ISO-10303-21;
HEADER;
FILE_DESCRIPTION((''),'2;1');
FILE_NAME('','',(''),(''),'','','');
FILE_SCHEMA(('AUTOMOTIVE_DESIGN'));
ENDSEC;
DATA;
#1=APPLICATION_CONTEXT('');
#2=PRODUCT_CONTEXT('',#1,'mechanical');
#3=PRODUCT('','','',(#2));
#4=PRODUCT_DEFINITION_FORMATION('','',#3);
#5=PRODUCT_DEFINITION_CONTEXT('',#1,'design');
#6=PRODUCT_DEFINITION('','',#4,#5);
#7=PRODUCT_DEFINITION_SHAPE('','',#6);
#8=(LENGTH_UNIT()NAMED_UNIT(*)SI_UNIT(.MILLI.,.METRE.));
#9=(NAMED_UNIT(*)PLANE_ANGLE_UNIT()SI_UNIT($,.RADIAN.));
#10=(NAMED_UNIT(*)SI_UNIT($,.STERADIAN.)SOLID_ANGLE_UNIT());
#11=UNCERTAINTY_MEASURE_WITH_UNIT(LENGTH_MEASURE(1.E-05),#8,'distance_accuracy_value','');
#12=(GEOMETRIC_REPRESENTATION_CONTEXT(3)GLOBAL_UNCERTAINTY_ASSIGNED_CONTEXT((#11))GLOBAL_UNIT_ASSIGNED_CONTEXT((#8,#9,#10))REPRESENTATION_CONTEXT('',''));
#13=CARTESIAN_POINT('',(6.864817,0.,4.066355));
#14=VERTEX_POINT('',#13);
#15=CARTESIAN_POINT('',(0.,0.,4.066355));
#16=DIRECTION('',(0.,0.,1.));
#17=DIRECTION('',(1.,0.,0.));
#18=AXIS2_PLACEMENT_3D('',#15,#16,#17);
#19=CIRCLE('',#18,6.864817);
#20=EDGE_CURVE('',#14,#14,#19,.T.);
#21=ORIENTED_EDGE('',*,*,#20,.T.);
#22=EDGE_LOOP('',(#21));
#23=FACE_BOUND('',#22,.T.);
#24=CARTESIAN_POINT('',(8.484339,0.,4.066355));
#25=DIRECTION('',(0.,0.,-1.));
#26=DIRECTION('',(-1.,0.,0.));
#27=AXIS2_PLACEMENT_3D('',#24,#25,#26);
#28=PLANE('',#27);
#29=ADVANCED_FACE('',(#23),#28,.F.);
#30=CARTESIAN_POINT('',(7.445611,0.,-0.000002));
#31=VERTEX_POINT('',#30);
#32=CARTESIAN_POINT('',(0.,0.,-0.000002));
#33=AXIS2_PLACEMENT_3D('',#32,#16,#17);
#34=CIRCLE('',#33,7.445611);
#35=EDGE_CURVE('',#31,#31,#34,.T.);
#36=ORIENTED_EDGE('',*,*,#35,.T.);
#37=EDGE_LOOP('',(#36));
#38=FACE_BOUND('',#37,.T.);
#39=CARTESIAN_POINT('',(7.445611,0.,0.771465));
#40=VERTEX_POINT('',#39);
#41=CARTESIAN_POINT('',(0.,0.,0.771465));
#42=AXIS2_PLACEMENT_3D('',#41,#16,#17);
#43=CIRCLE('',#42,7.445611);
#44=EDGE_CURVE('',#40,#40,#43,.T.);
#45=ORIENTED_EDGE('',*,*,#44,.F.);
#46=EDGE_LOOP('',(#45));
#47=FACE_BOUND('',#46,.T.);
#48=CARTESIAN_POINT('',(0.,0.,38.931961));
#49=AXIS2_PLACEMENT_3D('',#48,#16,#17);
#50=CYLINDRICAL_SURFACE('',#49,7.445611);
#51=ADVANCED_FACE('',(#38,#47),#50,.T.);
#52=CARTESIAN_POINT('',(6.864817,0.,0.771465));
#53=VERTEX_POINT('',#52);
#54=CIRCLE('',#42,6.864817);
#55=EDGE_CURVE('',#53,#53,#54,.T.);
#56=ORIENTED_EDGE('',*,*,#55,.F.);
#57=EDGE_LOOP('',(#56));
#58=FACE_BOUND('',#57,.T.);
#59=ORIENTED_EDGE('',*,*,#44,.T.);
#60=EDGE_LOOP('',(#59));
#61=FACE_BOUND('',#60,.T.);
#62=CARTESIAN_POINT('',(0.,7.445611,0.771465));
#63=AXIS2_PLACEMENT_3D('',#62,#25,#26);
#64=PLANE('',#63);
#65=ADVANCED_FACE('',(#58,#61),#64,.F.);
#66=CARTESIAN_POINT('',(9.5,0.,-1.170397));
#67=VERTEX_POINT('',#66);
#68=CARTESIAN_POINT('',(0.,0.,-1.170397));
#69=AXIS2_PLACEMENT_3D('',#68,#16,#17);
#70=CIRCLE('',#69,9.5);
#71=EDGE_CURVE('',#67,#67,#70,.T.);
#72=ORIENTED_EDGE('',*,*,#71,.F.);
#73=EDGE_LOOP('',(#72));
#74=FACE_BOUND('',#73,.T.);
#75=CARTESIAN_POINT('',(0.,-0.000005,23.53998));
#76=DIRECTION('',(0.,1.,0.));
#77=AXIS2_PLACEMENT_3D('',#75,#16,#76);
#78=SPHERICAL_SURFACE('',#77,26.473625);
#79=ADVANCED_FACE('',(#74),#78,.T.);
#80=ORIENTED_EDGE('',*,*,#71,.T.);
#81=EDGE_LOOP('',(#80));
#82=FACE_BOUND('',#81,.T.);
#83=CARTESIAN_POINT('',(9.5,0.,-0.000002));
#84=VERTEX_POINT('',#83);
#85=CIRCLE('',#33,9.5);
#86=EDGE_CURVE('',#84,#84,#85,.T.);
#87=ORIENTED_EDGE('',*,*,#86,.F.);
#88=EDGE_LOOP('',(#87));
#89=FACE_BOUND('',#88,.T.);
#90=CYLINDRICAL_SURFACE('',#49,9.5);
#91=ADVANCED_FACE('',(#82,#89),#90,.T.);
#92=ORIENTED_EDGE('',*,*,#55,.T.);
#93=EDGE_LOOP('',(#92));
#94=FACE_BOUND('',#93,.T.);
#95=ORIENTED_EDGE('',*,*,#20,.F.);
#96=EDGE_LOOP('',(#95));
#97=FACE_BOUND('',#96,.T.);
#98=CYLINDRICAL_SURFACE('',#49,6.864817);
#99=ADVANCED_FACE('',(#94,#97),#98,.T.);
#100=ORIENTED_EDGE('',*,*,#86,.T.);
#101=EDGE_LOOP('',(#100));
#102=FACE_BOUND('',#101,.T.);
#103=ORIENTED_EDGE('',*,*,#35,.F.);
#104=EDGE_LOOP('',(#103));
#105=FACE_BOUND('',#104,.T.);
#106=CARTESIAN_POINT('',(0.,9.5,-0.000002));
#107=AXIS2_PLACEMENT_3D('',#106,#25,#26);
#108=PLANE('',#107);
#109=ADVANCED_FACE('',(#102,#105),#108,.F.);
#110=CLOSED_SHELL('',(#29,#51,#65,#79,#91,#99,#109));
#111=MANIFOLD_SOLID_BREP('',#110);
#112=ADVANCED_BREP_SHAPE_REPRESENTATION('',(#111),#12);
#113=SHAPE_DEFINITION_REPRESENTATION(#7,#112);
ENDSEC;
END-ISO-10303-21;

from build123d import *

# Parameters (mm, degrees)
SKETCH6_R          = 6.864817117
CUT_EXTRUDE2_DEPTH = 3.3
SKETCH5_R          = 15.702559167
CUT_EXTRUDE3_DEPTH = 40


with BuildPart() as part:
    # Sketch1 → Revolve2 (revolve)
    with BuildSketch(Plane(origin=(0, 0, 0), x_dir=(0, 0, -1), z_dir=(1, 0, 0))):
        with BuildLine():
            Line((1.771e-06, 9.5), (1.771e-06, 7.445611339))
            Line((1.771e-06, 7.445611339), (-0.771464581, 7.445611339))
            Line((-0.771464581, 7.445611339), (-0.771464581, 6.864817117))
            Line((-0.771464581, 6.864817117), (-4.066354879, 6.864817117))
            Line((-4.066354879, 6.864817117), (-4.066354879, 8.484339467))
            Line((-4.066354879, 8.484339467), (-4.975618005, 9.546154997))
            Line((-4.975618005, 9.546154997), (-7.06424338, 9.546154997))
            Line((-7.06424338, 9.546154997), (-7.767897919, 10.954193429))
            Line((-7.767897919, 10.954193429), (-9.164037876, 10.954193429))
            Line((-9.164037876, 10.954193429), (-9.945876251, 9.546154997))
            Line((-9.945876251, 9.546154997), (-9.945876251, 8))
            Line((-9.945876251, 8), (-19.896053439, 8))
            Line((-19.896053439, 8), (-20.566354879, 7.426001631))
            Line((-20.566354879, 7.426001631), (-23.121440557, 7.426001631))
            Line((-23.121440557, 7.426001631), (-23.682625072, 6.864817117))
            Line((-23.682625072, 6.864817117), (-23.682625072, 6.383537324))
            Line((-23.682625072, 6.383537324), (-27.0133813, 6.383537324))
            Line((-27.0133813, 6.383537324), (-27.0133813, 5.464238658))
            Line((-27.0133813, 5.464238658), (-31.931960755, 5.464238658))
            Line((-31.931960755, 5.464238658), (-31.931960755, 1.447456583))
            Line((-31.931960755, 1.447456583), (-38.111348046, 1.447456583))
            Line((-38.111348046, 1.447456583), (-38.931960755, 1.037362766))
            Line((-38.931960755, 1.037362766), (-38.931960755, 0))
            Line((-38.931960755, 0), (2.933645121, 0))
            ThreePointArc((2.933645121, 0), (2.489100327, 4.831124101), (1.170397182, 9.5))
            Line((1.170397182, 9.5), (1.771e-06, 9.5))
        make_face()
    revolve(axis=Axis((0, 0, 38.931960755), (0, 0, -1)))


with BuildPart() as body_2:
    # Split1: the piece on the far side of the plane
    add(part.part)
    split(bisect_by=Plane(origin=(0, 6.864817117, 4.066354879), x_dir=(1, 0, 0), z_dir=(0, 0, 1)), keep=Keep.BOTTOM)


with BuildPart() as part_1:
    add(part.part)

    # Split1
    split(bisect_by=Plane(origin=(0, 6.864817117, 4.066354879), x_dir=(1, 0, 0), z_dir=(0, 0, 1)), keep=Keep.TOP)

    # Sketch6 → Cut-Extrude2 (cut)
    with BuildSketch(Plane(origin=(0, 0, 4.066354879), x_dir=(-1, 0, 0), z_dir=(0, 0, -1))):
        Circle(SKETCH6_R)
    extrude(amount=-CUT_EXTRUDE2_DEPTH, mode=Mode.SUBTRACT)

    # Sketch5 → Cut-Extrude3 (cut)
    with BuildSketch(Plane(origin=(0, 0, 4.066354879), x_dir=(-1, 0, 0), z_dir=(0, 0, -1))):
        Circle(SKETCH5_R)
    extrude(amount=-CUT_EXTRUDE3_DEPTH, mode=Mode.SUBTRACT)


solid = body_2.part
